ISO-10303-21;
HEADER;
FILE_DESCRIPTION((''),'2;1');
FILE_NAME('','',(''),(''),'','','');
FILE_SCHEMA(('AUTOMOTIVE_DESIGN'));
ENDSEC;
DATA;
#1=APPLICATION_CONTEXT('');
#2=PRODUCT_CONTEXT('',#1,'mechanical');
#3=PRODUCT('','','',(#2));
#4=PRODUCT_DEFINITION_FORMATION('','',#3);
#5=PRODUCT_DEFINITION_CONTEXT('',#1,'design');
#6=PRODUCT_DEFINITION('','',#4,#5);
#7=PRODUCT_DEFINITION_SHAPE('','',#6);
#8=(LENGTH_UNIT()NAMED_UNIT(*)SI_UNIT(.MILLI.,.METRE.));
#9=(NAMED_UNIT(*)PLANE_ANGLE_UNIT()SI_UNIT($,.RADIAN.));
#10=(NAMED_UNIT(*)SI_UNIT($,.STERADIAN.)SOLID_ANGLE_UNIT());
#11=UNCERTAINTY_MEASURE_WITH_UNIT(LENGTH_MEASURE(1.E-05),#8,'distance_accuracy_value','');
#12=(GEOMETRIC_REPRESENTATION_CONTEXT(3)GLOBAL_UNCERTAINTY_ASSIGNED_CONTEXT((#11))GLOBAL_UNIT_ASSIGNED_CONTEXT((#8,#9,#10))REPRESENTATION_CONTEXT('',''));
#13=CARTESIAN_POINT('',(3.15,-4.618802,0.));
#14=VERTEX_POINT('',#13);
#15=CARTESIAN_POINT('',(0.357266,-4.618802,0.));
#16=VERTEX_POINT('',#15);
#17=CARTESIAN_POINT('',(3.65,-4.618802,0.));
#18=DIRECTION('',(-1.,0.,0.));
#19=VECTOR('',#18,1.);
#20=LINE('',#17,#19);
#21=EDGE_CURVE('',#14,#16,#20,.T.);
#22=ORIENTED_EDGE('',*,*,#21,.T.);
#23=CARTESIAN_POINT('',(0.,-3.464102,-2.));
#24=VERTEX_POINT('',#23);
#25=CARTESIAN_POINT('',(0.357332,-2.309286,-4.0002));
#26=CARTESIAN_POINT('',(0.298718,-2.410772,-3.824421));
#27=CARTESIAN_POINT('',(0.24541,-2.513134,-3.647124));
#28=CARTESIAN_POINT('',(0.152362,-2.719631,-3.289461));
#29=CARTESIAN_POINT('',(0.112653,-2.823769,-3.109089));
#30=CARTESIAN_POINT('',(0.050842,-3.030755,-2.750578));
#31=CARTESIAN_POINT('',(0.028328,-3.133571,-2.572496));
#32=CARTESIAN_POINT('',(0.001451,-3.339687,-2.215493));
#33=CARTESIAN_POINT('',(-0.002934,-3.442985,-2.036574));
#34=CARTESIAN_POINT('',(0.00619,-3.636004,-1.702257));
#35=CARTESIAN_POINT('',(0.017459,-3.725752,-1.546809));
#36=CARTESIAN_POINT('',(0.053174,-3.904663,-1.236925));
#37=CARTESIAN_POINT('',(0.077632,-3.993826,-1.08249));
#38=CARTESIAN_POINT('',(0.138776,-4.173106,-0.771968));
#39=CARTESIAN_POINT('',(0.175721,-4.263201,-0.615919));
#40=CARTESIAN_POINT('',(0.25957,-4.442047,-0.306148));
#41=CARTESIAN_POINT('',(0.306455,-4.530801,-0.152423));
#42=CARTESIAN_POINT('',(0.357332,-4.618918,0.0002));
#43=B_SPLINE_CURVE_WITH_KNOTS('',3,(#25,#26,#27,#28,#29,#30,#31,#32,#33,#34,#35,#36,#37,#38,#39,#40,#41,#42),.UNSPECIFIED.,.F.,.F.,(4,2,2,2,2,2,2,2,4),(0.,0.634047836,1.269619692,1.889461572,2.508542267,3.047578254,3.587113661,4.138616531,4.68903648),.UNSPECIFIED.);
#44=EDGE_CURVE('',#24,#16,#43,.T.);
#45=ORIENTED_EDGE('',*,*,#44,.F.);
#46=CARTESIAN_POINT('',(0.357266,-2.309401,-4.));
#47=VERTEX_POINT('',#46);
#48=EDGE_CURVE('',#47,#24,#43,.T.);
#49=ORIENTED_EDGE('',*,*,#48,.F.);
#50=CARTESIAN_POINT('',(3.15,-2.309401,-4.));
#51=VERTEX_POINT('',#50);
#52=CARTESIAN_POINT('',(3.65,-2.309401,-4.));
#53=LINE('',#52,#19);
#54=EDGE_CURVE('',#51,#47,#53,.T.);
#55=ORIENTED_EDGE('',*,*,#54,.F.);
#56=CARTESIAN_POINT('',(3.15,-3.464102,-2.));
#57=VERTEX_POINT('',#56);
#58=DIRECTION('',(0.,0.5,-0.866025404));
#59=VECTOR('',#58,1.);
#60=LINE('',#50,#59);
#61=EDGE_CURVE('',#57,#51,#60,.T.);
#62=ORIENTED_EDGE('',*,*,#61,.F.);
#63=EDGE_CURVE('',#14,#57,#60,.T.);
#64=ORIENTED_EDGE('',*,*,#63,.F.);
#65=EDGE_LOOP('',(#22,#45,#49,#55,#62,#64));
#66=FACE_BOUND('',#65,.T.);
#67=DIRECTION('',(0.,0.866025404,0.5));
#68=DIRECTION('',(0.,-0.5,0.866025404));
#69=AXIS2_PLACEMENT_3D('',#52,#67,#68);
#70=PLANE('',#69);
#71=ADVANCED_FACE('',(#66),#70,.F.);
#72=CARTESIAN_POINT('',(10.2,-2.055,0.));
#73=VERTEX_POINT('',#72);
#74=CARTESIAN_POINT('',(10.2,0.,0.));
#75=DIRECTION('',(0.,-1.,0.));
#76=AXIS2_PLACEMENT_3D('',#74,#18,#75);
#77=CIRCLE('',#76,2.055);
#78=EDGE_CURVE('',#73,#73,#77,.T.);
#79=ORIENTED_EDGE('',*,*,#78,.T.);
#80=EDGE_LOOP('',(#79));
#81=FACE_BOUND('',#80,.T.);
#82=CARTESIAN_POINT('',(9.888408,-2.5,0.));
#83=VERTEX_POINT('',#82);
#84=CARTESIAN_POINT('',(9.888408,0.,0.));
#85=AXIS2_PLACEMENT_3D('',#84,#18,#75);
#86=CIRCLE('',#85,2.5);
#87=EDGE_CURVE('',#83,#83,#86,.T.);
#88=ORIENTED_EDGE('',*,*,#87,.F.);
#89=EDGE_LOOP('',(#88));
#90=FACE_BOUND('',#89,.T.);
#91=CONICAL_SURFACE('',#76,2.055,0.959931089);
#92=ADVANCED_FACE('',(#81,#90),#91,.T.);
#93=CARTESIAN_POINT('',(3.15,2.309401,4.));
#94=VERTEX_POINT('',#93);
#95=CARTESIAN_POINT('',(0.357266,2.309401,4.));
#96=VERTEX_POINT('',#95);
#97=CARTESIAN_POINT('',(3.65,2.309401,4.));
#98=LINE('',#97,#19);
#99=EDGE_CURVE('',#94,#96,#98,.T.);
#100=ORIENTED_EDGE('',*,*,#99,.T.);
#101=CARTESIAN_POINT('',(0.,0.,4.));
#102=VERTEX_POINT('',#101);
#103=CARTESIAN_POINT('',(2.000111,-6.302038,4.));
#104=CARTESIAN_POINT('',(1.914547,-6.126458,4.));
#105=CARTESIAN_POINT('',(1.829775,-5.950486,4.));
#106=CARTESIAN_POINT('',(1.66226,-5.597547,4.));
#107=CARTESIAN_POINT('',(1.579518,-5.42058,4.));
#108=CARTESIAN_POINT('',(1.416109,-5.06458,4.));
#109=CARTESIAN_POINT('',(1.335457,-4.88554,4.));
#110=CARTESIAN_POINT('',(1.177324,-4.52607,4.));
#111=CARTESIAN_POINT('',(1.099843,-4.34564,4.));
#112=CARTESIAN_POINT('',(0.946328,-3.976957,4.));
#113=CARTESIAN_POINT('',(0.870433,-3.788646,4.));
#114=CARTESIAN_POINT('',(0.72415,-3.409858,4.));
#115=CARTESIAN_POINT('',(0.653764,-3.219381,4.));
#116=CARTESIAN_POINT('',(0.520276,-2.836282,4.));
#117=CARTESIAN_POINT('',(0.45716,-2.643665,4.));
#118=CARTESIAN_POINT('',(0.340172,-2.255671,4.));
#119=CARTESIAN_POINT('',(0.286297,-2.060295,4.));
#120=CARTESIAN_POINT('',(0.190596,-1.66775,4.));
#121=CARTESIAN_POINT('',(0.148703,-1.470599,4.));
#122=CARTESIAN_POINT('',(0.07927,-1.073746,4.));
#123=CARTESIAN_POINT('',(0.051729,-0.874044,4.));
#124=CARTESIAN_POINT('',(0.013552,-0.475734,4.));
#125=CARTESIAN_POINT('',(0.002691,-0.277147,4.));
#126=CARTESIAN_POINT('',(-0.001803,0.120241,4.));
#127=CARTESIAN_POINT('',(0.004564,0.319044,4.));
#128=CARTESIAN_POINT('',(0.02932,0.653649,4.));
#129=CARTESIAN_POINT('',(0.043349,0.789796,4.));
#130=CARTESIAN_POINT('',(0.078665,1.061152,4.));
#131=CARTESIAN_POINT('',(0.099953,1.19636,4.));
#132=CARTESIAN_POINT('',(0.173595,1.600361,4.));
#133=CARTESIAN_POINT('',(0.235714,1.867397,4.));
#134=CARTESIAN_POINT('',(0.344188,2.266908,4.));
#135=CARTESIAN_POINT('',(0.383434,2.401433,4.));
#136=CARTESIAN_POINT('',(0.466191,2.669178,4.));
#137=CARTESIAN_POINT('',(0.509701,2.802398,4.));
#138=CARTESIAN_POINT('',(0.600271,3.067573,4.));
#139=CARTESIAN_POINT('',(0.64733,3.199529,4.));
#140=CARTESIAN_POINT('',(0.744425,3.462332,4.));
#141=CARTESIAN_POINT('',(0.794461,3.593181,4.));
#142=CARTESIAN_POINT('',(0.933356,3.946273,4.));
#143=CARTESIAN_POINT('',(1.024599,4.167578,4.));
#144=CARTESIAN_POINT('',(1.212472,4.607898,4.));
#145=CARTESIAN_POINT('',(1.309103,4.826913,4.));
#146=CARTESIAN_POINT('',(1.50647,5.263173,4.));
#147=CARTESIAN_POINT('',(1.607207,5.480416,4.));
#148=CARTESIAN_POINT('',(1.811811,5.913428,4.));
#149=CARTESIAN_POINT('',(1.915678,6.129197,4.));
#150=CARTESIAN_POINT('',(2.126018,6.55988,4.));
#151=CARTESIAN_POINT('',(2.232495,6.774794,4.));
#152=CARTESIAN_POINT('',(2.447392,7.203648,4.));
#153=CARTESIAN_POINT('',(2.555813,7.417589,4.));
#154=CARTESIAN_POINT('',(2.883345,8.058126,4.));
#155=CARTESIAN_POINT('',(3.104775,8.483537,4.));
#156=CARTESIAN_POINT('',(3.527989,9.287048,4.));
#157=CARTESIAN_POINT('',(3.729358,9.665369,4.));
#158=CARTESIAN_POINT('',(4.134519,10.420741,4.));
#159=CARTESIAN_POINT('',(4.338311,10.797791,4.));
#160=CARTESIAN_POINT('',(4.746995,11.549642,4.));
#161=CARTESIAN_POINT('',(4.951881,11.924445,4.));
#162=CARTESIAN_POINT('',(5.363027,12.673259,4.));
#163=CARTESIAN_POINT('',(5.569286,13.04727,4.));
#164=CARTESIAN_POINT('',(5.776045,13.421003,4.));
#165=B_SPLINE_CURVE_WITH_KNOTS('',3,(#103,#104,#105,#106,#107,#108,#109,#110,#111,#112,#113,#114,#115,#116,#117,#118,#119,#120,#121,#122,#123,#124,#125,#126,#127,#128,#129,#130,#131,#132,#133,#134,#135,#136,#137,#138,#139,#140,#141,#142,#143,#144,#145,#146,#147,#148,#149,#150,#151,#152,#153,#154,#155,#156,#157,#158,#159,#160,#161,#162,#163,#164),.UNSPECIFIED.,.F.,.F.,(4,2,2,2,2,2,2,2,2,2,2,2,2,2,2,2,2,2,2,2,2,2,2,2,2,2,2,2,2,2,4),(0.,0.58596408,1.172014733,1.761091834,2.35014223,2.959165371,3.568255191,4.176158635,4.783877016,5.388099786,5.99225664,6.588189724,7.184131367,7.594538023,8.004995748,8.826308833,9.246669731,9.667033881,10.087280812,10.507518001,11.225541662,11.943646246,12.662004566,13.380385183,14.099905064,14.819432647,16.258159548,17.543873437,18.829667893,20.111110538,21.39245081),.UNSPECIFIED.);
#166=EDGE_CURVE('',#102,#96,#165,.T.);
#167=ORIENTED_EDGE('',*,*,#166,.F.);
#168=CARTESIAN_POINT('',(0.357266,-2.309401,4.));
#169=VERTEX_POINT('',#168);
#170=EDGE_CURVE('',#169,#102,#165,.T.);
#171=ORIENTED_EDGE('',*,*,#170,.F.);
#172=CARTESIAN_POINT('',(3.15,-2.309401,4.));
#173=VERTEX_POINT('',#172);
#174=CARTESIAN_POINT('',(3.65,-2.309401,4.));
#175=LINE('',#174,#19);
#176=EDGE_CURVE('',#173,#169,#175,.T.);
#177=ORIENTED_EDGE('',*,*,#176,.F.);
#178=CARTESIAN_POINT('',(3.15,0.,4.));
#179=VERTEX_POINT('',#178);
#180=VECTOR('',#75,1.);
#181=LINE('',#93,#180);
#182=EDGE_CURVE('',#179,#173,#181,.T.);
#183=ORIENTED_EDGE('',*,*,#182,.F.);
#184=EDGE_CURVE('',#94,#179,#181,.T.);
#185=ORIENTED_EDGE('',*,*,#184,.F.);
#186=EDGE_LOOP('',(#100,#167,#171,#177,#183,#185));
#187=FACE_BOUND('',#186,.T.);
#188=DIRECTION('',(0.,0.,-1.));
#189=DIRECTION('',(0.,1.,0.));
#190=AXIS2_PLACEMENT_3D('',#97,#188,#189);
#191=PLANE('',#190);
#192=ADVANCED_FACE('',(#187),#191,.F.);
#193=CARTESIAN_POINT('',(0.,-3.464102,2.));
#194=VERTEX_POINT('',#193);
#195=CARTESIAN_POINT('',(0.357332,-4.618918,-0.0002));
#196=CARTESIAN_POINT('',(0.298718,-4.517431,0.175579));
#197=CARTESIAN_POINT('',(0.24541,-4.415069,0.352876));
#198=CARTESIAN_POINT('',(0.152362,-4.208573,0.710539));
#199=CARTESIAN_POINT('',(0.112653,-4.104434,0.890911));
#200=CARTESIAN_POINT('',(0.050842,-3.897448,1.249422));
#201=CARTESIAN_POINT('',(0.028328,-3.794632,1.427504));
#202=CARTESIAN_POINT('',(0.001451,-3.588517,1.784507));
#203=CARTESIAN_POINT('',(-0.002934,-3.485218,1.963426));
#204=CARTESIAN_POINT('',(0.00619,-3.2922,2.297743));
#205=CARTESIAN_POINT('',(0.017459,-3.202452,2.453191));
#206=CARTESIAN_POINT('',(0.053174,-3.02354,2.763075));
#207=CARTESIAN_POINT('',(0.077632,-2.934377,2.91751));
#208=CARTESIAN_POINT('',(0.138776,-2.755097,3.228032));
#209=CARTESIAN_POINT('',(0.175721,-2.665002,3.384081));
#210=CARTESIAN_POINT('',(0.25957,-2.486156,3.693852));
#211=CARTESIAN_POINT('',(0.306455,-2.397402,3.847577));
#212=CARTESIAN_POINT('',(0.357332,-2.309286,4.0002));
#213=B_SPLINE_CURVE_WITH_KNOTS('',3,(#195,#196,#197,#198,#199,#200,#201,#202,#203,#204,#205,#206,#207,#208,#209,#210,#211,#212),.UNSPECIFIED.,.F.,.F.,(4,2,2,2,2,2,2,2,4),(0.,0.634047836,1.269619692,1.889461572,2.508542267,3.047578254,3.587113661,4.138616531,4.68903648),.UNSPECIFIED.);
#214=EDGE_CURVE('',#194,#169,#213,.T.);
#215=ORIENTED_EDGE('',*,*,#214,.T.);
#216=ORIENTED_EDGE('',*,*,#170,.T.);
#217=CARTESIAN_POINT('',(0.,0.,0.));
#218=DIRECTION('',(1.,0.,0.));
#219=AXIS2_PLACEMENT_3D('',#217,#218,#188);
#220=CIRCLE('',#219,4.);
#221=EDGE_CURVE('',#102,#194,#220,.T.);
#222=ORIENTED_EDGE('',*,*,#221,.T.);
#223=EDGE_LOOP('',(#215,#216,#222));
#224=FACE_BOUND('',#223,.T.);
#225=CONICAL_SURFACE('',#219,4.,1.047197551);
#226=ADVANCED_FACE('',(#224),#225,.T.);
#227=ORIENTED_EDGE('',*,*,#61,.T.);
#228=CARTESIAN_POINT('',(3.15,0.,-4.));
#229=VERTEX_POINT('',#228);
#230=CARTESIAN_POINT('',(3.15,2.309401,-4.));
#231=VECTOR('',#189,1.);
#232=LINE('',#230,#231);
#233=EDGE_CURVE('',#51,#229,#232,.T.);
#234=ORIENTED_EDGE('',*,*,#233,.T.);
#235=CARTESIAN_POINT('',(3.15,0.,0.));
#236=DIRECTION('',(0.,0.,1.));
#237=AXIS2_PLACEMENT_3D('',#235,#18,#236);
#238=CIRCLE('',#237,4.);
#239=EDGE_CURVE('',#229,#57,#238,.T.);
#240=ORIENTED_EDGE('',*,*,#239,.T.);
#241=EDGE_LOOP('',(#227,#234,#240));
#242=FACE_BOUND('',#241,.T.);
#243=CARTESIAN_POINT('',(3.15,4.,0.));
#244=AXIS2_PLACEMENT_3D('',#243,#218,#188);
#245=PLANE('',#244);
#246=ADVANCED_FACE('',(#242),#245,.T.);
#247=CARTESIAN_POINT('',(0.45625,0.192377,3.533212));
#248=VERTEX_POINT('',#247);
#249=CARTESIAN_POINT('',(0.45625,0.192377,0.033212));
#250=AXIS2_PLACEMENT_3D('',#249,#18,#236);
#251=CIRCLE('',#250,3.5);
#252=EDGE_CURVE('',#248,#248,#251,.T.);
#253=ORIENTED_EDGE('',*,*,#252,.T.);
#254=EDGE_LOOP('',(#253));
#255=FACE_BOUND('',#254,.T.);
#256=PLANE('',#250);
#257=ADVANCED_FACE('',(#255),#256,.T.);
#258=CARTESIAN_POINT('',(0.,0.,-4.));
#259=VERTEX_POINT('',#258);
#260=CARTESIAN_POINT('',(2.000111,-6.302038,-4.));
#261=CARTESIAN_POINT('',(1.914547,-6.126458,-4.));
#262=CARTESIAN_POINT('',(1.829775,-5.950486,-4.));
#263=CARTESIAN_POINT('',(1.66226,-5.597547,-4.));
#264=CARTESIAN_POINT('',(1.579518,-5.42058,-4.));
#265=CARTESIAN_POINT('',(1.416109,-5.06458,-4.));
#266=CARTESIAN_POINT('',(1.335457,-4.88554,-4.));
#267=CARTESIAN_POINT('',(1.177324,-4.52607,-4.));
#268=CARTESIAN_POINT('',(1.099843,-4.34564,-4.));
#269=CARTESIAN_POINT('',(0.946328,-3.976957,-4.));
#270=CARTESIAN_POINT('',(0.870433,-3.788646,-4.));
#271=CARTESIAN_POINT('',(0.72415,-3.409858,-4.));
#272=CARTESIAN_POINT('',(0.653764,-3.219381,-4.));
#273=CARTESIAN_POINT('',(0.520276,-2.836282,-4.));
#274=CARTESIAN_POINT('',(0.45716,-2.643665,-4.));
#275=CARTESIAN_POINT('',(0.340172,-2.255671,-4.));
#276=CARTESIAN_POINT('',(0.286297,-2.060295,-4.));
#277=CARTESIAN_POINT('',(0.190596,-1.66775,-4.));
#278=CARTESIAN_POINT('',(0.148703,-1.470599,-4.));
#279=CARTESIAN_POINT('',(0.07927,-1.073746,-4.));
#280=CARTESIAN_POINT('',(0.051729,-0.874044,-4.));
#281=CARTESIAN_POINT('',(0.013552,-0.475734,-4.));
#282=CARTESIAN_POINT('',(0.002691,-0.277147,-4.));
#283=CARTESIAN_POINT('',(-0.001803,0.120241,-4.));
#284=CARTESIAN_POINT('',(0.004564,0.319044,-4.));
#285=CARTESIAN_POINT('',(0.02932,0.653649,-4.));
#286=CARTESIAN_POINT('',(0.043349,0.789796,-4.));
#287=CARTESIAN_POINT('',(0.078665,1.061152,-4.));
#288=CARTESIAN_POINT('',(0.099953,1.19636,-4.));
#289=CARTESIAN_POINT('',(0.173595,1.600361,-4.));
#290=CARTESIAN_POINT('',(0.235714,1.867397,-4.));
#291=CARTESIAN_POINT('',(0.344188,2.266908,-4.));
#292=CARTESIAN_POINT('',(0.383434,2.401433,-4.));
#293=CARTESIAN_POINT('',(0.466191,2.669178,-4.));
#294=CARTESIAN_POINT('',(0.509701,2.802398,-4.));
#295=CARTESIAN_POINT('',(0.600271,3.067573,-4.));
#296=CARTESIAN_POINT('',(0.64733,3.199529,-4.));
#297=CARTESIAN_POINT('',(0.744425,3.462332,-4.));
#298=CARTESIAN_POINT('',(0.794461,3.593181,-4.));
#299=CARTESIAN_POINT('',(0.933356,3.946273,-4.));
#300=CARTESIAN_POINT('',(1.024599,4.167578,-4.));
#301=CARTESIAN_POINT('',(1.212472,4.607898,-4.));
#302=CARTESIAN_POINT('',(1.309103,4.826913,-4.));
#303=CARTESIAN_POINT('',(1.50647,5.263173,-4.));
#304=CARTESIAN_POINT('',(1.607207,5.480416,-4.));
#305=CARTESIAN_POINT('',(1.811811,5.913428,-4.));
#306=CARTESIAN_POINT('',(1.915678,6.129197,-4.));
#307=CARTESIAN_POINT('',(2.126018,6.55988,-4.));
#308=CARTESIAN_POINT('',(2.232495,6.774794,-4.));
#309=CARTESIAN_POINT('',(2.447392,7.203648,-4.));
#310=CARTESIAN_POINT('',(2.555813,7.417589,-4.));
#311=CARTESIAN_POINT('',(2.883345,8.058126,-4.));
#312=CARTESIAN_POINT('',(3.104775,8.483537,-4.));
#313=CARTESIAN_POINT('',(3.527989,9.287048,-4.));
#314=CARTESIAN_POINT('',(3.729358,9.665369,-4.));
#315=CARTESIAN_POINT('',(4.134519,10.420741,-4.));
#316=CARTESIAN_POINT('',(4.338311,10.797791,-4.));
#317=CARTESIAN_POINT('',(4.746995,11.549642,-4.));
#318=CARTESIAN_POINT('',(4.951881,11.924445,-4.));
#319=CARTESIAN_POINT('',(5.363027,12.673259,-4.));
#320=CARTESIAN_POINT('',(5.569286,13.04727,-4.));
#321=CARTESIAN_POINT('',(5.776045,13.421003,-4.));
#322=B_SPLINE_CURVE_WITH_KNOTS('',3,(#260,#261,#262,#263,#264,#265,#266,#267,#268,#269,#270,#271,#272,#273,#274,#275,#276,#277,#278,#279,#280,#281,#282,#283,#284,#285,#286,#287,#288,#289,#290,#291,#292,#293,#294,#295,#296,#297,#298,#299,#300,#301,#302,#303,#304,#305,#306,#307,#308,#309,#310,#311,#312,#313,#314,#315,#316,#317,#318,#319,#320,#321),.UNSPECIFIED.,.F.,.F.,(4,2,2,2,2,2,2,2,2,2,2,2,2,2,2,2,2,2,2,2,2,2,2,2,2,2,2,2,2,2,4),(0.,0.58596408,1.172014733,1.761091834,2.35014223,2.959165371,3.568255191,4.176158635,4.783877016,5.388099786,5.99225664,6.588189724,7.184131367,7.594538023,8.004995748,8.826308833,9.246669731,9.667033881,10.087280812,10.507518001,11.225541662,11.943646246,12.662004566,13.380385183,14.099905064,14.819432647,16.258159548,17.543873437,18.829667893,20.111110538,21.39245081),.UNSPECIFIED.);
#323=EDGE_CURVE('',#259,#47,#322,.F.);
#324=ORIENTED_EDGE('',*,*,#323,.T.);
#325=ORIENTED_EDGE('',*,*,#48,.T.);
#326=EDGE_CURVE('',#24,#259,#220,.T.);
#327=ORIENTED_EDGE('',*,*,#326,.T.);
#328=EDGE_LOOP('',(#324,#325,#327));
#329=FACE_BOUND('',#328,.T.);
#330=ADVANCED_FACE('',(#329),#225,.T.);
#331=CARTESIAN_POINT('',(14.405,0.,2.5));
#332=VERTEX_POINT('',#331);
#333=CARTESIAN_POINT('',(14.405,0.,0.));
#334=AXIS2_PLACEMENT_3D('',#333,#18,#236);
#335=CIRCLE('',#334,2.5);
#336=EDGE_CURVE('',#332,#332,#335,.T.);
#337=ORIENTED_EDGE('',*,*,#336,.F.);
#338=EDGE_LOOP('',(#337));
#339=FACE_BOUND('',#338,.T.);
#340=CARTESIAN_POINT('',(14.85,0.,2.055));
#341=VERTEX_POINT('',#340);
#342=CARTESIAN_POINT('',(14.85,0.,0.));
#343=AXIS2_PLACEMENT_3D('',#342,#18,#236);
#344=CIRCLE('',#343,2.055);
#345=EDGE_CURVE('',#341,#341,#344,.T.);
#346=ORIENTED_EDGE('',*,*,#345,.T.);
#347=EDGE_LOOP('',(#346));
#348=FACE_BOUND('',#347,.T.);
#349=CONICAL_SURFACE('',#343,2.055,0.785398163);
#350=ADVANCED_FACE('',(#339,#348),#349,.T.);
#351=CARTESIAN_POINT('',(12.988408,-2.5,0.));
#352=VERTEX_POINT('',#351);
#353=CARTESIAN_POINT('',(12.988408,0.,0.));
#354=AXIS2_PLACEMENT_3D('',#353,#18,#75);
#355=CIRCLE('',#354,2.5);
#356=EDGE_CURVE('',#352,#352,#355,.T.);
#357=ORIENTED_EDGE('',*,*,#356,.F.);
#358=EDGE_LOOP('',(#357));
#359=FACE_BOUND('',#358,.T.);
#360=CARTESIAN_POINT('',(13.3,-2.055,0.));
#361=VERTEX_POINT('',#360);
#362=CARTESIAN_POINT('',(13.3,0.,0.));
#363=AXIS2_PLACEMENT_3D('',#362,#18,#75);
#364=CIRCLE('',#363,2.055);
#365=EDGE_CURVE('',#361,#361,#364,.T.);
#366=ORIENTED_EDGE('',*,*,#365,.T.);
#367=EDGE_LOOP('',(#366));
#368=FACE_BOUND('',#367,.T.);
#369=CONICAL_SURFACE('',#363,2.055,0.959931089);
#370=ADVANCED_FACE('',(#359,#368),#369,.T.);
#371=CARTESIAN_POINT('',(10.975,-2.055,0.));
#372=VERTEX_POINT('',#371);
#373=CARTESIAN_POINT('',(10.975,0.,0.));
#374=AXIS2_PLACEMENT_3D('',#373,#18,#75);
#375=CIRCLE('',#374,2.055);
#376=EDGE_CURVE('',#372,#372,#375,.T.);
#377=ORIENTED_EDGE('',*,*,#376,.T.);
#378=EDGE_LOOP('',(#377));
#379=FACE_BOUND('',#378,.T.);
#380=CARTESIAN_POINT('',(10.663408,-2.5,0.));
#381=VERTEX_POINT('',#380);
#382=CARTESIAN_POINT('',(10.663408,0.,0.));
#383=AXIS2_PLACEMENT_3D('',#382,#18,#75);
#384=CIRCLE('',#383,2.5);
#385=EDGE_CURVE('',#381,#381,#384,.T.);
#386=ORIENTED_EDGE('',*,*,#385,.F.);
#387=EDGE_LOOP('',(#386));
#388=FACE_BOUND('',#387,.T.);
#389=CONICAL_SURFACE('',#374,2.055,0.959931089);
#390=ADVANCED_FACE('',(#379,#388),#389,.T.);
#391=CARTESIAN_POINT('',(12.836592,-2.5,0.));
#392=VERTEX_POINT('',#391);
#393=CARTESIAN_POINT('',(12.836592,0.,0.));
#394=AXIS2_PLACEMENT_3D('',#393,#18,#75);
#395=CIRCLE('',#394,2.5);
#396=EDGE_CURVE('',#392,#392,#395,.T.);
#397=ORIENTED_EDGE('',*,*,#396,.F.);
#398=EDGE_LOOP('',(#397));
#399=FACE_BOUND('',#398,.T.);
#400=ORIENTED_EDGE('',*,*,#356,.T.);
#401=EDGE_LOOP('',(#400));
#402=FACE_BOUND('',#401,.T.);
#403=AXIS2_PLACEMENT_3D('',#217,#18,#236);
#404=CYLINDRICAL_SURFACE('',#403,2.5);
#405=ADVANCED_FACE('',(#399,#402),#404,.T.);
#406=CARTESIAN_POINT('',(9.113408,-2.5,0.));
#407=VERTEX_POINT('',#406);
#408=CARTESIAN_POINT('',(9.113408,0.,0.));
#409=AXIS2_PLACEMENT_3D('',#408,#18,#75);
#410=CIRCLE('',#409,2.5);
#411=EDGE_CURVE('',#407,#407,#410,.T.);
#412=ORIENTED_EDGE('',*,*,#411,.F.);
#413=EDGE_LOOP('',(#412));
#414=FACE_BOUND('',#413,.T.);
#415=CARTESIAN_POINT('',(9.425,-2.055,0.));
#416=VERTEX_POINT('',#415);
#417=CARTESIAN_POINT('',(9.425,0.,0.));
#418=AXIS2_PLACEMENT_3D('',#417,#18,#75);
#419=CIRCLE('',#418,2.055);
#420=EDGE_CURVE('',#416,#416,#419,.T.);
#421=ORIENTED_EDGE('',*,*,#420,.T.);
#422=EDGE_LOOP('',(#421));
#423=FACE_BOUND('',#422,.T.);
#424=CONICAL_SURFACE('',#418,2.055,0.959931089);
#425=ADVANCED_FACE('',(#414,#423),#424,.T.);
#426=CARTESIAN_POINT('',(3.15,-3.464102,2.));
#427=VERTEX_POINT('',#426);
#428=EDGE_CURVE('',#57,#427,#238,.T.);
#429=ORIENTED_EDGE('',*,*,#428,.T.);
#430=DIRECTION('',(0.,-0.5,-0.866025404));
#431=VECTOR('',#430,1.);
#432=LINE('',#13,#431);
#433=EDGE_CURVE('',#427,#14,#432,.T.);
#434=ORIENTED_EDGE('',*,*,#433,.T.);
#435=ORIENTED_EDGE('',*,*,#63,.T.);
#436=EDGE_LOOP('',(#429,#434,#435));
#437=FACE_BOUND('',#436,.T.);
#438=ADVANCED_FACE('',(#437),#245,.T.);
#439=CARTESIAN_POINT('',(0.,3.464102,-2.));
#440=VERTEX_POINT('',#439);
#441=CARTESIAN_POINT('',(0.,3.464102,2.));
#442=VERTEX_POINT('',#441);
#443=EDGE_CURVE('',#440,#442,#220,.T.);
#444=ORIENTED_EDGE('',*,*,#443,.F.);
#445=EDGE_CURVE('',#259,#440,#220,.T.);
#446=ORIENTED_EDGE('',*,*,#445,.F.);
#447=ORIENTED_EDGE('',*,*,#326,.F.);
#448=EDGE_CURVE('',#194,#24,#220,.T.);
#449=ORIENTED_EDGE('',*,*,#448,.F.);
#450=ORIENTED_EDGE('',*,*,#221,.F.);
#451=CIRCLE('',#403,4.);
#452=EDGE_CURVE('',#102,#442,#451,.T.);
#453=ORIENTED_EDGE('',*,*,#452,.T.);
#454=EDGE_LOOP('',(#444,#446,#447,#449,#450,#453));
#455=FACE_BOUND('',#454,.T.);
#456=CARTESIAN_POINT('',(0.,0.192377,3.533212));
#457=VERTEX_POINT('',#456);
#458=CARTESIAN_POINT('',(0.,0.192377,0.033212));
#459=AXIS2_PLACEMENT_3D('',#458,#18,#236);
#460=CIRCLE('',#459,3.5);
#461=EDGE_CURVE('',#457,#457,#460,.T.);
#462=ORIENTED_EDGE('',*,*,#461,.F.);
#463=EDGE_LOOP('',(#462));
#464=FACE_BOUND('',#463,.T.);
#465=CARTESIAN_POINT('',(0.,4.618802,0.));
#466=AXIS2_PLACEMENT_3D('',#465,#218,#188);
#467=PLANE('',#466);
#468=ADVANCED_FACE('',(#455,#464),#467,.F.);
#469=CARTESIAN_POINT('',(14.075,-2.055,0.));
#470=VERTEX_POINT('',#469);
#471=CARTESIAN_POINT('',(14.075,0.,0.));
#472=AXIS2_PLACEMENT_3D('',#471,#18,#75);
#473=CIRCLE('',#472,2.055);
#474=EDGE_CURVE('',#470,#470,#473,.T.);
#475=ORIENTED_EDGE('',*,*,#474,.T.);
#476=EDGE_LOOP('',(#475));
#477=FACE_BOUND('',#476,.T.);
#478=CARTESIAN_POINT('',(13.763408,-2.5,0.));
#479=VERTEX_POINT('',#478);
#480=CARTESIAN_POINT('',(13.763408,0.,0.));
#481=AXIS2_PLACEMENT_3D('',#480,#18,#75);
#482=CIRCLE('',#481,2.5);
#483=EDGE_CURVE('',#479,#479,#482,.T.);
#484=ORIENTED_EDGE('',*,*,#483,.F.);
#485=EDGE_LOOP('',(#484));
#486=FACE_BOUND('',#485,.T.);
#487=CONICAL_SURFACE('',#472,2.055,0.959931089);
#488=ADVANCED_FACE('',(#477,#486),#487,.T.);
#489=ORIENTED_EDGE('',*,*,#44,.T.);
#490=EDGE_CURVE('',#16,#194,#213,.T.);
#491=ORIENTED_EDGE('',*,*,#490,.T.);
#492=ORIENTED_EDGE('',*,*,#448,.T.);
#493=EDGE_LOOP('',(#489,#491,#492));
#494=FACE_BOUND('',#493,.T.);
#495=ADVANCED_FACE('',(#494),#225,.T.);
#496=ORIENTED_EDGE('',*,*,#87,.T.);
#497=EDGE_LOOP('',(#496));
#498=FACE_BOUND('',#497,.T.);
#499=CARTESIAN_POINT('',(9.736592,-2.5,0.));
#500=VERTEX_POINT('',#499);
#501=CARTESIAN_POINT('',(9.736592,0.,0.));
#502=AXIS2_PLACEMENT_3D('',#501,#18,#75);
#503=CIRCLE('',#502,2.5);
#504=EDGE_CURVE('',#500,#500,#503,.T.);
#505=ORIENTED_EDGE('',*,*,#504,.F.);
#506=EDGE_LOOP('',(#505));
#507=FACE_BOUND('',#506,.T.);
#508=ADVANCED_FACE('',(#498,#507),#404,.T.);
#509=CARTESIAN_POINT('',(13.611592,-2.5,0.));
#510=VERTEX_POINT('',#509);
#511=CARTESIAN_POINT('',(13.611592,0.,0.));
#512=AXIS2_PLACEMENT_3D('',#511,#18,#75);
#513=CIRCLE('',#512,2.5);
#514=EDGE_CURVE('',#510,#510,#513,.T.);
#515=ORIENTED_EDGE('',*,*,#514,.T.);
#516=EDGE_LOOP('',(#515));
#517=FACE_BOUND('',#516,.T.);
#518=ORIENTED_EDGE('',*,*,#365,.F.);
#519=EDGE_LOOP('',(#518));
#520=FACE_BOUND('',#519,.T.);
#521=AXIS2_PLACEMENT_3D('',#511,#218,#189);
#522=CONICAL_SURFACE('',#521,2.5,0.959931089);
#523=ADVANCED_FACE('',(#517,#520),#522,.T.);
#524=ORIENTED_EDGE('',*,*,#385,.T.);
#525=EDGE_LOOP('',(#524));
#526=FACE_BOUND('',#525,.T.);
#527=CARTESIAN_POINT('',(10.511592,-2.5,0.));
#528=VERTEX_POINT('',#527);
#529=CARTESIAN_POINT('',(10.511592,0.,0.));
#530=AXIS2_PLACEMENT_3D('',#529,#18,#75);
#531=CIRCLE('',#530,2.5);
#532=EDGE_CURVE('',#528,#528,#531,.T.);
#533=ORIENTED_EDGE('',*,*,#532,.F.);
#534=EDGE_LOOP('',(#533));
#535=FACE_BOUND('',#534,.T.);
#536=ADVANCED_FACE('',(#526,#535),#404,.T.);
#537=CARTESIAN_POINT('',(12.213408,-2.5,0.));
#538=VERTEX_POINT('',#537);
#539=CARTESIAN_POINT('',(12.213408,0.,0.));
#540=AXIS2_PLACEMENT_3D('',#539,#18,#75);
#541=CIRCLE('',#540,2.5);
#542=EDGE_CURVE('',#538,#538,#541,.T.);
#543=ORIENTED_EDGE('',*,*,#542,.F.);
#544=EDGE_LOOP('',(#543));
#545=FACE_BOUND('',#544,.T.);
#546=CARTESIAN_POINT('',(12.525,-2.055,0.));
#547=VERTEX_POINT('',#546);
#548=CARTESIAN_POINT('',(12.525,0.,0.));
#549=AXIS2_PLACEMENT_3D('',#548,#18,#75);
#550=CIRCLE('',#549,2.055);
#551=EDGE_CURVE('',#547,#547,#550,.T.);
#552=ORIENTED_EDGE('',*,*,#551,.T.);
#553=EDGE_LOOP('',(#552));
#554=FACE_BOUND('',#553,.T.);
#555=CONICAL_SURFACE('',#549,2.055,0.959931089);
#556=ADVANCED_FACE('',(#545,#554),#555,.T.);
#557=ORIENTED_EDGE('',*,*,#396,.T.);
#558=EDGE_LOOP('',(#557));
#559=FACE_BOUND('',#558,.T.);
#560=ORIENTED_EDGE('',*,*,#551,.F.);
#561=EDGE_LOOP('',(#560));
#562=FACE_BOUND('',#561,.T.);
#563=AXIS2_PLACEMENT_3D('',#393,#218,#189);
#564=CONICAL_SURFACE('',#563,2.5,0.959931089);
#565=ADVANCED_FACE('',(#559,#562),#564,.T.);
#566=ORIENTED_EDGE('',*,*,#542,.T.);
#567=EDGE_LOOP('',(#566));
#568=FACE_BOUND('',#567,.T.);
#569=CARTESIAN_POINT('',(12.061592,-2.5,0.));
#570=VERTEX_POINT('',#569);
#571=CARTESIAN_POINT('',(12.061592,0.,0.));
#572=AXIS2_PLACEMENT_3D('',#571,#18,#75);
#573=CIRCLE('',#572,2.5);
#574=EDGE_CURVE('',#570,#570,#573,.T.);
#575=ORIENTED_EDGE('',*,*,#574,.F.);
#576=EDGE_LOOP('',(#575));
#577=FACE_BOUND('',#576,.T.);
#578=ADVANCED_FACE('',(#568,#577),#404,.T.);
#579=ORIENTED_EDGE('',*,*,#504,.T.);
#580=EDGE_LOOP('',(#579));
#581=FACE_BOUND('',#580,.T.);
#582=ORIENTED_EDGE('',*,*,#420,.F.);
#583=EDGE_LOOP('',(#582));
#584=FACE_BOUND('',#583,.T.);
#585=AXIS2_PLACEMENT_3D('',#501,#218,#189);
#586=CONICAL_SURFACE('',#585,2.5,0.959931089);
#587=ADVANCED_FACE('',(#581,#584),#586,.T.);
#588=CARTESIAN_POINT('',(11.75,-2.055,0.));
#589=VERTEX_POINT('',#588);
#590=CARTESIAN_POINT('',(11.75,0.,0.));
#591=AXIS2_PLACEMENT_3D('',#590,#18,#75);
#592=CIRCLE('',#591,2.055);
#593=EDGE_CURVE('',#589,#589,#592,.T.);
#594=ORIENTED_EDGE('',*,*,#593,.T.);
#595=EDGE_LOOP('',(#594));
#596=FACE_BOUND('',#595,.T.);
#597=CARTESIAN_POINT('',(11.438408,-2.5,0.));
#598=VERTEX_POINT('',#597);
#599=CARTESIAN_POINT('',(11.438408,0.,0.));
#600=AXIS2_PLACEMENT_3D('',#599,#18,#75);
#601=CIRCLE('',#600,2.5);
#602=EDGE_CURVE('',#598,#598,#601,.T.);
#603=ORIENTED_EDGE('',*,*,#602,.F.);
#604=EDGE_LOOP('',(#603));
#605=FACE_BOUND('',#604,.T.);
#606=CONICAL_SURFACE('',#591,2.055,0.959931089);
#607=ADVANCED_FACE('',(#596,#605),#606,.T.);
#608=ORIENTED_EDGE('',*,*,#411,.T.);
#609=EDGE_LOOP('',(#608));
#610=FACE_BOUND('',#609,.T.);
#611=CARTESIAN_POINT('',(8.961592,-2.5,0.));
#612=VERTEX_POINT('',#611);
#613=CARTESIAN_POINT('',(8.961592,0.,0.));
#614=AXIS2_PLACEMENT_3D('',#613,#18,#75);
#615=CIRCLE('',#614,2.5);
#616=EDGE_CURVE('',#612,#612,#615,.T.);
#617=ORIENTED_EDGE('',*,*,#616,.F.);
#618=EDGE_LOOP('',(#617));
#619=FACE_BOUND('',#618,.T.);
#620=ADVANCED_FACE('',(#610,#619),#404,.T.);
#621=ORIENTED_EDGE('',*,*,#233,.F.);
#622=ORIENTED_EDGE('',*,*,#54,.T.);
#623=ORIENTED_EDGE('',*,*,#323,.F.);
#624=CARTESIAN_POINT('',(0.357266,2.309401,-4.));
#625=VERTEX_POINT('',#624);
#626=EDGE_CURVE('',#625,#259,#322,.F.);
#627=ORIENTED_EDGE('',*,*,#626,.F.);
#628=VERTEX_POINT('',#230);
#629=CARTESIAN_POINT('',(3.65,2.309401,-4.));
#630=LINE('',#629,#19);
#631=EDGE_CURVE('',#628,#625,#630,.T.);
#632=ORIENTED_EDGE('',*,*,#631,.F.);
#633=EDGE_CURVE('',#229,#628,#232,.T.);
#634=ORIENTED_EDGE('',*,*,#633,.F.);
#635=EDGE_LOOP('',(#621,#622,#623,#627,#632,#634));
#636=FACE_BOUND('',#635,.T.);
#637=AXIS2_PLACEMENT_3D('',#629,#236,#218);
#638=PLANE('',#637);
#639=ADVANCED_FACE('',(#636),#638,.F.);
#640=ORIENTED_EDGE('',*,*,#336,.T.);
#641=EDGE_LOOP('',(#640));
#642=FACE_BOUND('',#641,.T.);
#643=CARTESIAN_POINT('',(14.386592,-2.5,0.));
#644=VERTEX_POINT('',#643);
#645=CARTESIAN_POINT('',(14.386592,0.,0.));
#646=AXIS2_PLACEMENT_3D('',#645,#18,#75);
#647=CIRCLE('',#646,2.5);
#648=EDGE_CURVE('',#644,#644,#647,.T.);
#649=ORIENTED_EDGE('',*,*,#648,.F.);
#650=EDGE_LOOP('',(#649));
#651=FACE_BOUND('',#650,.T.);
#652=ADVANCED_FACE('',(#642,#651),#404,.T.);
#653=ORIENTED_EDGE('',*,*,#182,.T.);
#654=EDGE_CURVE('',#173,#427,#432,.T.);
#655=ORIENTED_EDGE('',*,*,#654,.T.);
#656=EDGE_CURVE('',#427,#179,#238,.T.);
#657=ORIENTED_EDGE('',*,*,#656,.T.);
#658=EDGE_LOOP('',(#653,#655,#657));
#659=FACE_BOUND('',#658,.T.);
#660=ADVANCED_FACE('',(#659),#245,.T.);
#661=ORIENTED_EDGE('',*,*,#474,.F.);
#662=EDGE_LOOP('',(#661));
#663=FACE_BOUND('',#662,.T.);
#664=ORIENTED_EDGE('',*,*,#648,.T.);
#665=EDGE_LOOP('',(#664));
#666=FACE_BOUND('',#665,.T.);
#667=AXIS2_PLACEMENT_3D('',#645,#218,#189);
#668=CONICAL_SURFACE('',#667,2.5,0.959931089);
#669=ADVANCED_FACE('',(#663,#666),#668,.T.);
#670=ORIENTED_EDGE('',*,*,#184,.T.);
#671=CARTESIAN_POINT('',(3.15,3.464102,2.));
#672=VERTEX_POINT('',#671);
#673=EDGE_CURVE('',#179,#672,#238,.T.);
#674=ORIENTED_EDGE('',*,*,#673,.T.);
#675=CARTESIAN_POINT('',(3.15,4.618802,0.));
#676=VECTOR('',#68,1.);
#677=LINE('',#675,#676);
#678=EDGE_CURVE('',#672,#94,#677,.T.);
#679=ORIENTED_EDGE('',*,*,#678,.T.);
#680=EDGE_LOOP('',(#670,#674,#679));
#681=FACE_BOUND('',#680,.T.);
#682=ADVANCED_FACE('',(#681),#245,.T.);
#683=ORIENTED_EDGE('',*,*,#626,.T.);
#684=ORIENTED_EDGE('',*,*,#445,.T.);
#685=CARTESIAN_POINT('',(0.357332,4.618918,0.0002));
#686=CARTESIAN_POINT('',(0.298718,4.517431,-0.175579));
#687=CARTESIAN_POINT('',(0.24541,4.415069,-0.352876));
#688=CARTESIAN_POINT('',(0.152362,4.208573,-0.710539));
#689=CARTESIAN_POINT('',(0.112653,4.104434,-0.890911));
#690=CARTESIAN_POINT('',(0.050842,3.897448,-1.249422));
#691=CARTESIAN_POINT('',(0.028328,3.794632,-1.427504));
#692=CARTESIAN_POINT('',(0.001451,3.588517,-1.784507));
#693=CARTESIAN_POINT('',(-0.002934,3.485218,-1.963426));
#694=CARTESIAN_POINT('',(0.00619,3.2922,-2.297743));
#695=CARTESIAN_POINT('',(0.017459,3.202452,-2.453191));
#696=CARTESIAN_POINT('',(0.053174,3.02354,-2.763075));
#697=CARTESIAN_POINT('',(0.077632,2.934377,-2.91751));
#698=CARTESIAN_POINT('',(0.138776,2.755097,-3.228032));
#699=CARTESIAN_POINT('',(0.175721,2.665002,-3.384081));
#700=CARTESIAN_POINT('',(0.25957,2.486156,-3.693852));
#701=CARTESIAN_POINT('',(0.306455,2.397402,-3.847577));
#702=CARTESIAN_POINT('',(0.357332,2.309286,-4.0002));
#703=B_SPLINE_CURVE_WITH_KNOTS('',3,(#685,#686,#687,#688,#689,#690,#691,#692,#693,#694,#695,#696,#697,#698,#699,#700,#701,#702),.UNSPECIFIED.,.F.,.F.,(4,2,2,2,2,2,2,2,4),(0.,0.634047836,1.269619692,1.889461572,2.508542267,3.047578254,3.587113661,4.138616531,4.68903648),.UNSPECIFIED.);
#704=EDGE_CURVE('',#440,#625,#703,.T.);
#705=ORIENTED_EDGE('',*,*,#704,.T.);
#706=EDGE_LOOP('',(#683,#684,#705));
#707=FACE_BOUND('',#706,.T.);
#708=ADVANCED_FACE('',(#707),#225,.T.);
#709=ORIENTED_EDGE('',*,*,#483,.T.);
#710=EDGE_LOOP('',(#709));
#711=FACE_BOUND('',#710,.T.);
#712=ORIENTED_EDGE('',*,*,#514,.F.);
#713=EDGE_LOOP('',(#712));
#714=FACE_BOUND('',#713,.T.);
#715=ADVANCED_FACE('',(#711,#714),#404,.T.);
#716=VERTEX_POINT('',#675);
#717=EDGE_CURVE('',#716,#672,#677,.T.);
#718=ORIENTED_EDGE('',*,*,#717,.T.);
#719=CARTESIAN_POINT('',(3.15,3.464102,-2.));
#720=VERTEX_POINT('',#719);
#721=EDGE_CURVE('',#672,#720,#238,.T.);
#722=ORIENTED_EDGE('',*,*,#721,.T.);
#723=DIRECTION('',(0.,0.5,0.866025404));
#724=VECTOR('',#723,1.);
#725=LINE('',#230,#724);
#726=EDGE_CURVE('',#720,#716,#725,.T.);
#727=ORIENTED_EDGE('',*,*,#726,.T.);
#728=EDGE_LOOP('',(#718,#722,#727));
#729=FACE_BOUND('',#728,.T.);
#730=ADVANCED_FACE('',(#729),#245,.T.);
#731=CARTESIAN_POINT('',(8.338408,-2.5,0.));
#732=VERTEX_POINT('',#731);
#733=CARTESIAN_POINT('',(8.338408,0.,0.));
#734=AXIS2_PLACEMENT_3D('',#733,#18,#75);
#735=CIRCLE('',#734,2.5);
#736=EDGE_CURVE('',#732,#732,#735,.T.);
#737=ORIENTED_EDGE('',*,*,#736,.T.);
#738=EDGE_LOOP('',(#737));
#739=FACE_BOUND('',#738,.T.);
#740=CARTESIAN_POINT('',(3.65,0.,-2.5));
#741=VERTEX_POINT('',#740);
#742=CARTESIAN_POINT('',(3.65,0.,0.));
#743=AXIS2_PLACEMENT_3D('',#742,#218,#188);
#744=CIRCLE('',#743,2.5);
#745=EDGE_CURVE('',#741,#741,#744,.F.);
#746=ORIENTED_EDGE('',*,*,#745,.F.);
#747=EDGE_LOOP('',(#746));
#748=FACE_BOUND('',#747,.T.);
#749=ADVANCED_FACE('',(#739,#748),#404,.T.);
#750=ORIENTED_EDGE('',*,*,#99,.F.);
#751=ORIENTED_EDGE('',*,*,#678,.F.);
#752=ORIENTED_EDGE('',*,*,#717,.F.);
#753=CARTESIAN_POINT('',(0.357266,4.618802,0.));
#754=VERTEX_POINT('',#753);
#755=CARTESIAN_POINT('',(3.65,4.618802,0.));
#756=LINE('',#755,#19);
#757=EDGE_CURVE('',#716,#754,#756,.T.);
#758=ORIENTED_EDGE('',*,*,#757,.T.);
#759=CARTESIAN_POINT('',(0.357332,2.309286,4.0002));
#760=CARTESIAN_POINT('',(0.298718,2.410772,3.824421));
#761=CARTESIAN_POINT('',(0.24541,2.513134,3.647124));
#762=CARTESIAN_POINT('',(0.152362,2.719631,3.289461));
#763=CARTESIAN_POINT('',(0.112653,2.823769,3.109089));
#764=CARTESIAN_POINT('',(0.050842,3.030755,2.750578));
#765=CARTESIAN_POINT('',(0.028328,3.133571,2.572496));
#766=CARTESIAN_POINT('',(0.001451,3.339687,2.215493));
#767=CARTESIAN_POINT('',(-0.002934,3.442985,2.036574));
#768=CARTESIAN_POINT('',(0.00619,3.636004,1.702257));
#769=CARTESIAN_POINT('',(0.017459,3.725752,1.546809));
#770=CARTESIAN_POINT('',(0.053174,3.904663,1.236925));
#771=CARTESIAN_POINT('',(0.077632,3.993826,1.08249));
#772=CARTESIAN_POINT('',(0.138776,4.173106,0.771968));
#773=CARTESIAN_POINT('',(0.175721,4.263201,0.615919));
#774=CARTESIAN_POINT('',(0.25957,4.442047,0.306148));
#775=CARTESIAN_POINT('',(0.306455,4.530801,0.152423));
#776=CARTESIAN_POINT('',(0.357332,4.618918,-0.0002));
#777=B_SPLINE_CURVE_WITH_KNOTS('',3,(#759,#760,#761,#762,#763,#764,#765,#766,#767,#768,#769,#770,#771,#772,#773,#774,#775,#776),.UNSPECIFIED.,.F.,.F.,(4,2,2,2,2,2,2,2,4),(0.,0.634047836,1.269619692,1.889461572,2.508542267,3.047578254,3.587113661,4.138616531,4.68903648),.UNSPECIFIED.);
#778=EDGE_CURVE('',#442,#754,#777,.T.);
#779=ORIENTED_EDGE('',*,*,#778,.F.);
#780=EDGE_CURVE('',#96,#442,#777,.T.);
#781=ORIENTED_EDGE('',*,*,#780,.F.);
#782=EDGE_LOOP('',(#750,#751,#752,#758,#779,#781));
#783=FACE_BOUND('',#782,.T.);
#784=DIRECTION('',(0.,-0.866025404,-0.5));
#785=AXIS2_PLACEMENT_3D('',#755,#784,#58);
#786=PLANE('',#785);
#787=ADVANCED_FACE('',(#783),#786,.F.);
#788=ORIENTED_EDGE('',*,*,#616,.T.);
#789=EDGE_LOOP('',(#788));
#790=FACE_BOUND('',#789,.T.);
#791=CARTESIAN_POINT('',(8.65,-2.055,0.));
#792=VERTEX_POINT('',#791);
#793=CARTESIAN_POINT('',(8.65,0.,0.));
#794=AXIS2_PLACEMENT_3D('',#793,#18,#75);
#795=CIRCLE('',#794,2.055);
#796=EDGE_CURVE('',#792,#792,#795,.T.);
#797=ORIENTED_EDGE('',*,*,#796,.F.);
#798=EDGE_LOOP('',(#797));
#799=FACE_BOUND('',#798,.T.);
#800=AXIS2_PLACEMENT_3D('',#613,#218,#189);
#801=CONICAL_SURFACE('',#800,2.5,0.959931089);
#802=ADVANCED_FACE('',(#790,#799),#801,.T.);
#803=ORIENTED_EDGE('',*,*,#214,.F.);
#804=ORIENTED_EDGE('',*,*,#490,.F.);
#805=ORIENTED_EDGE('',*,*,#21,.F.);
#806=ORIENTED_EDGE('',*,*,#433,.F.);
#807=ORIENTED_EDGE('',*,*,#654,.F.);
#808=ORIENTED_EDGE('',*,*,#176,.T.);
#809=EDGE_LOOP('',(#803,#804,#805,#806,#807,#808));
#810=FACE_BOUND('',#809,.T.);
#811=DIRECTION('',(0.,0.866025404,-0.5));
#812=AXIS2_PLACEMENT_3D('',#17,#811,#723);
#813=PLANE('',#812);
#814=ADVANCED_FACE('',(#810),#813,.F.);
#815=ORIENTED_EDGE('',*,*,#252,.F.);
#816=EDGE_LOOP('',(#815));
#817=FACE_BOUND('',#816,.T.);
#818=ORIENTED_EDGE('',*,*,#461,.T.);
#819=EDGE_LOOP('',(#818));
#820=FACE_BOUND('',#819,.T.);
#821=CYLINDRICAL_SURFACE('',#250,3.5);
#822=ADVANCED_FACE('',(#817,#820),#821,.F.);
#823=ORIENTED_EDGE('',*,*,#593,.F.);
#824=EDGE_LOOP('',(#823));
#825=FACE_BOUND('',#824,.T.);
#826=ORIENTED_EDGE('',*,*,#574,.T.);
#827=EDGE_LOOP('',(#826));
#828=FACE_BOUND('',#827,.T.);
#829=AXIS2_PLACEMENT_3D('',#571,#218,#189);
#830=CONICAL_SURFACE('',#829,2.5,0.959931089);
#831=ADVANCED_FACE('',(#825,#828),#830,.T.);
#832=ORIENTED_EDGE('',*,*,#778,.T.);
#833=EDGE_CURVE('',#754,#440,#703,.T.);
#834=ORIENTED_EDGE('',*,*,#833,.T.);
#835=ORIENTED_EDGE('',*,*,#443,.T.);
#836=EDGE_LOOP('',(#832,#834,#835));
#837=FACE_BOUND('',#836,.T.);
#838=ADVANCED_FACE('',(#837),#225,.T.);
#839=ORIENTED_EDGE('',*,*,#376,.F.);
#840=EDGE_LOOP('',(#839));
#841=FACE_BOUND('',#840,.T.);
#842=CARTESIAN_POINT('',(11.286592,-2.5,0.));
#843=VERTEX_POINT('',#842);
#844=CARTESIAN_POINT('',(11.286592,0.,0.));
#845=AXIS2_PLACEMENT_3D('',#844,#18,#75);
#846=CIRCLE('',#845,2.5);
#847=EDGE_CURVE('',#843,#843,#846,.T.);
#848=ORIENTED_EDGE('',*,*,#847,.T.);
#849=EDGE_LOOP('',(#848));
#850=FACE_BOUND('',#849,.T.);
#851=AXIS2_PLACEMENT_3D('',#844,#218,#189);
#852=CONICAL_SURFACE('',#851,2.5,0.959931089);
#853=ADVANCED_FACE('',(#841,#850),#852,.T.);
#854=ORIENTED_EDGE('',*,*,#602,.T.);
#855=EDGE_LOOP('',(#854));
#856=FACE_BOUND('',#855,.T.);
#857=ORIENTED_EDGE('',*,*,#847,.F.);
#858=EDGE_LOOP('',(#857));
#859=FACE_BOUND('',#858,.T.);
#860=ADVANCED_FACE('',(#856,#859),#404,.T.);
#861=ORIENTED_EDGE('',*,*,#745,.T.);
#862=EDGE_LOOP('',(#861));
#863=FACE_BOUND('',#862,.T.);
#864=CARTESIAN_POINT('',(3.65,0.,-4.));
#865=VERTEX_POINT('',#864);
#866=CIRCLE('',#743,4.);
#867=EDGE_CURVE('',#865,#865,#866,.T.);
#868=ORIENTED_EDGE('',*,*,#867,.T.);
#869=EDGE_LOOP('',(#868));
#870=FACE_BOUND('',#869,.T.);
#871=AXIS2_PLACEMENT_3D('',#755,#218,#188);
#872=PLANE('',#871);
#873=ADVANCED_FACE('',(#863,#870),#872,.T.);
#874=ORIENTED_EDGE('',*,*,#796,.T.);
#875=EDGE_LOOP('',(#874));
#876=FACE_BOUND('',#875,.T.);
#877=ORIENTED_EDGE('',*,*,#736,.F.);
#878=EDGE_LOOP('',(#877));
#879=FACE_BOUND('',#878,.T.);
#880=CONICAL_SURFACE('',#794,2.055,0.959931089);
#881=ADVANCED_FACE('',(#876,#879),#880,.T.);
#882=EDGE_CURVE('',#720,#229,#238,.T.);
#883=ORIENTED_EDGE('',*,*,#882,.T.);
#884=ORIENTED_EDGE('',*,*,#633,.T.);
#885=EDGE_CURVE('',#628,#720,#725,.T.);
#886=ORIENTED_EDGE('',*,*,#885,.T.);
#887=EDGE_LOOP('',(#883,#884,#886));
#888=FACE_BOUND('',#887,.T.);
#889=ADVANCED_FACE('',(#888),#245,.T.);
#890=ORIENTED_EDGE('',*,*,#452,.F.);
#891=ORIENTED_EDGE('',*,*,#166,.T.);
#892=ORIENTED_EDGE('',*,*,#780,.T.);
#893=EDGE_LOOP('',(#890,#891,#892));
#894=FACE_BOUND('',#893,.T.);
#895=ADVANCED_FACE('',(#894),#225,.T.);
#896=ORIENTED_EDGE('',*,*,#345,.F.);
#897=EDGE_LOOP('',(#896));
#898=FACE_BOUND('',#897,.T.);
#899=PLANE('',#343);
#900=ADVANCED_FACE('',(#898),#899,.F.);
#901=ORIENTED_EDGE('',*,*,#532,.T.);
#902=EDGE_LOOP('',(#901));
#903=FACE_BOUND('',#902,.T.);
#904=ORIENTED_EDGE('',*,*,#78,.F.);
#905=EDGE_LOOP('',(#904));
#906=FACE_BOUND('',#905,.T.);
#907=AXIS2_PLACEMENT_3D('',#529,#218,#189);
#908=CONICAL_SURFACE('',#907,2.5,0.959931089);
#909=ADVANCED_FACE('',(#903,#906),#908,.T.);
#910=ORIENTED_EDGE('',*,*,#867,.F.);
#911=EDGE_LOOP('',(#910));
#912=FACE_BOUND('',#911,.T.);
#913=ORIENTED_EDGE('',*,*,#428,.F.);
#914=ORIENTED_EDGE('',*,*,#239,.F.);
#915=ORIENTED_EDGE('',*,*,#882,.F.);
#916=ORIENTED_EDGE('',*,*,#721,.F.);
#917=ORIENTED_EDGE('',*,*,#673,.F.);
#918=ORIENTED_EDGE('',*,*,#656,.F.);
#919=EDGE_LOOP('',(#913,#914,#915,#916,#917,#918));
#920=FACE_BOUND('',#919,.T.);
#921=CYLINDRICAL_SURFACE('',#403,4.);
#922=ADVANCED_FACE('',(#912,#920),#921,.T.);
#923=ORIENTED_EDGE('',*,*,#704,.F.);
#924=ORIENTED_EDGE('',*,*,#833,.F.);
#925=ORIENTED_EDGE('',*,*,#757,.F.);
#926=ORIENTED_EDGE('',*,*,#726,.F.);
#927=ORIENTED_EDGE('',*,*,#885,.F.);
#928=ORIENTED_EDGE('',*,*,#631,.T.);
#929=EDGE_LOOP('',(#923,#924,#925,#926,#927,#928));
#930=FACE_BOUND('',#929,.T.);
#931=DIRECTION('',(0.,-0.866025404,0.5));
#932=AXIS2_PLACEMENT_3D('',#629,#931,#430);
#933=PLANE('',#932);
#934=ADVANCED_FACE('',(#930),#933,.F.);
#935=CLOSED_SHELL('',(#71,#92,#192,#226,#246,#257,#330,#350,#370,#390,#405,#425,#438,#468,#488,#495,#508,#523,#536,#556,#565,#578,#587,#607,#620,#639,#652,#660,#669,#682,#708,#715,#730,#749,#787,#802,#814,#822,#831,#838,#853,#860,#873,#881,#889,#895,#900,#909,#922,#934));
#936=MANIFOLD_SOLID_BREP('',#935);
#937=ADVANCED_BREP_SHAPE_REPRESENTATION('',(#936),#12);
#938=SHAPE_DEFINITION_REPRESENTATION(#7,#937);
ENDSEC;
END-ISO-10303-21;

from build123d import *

# Parameters (mm, degrees)
BASEHEAD_DEPTH     = 3.65
INDENT_START       = -0.45625
INDENT_2_OUTLINE_R = 3.5
INDENT_2_DEPTH     = 0.45625
SKETCH4_W          = 0.5
SKETCH4_H          = 10.618802154
THDSCHPAT_COUNT    = 8
THDSCHPAT_PITCH    = 0.775


# Read off the part's stored shape, not the designer's step: Indent
with BuildPart() as part:
    # Sketch1 → BaseHead (new body)
    with BuildSketch(Plane(origin=(0, 0, 0), x_dir=(0, 0, -1), z_dir=(1, 0, 0))):
        Polygon((4, 2.309401077), (4, -2.309401077), (0, -4.618802154), (-4, -2.309401077), (-4, 2.309401077), (0, 4.618802154), align=None)
    extrude(amount=BASEHEAD_DEPTH)

    # Indent outline → Indent (revolve)
    with BuildSketch(Plane.YX):
        Polygon((2.5, 3.65), (2.5, 14.405), (2.055, 14.85), (0, 14.85), (0, 3.65), align=None)
    revolve(axis=Axis((0, 0, 0), (1, 0, 0)))

    # Indent 2 outline → Indent 2 (cut)
    with BuildSketch(Plane.ZY.offset(INDENT_START)):
        with Locations((0.033212245, 0.192376607)):
            Circle(INDENT_2_OUTLINE_R)
    extrude(amount=INDENT_2_DEPTH, mode=Mode.SUBTRACT)

    # Sketch3 → HeadChamfer (revolve, cut)
    with BuildSketch(Plane.XY, mode=Mode.PRIVATE) as headchamfer_sk:
        Polygon((0, 4), (3.244016936, 9.618802154), (3.244016936, 14.618802154), (-10, 14.618802154), (-10, 4), align=None)
    revolve(headchamfer_sk.sketch.rotate(Axis((0, 0, 0), (1, 0, 0)), 90), axis=Axis((0, 0, 0), (1, 0, 0)), mode=Mode.SUBTRACT)

    # Sketch4 → BearingFace (revolve, cut)
    with BuildSketch(Plane.XY, mode=Mode.PRIVATE) as bearingface_sk:
        with Locations((3.4, 9.309401077)):
            Rectangle(SKETCH4_W, SKETCH4_H)
    revolve(bearingface_sk.sketch.rotate(Axis((0, 0, 0), (1, 0, 0)), 90), axis=Axis((0, 0, 0), (1, 0, 0)), mode=Mode.SUBTRACT)

    # ThdSchSke → ThreadSchematic (revolve, cut)
    with BuildSketch(Plane.XY):
        Polygon((8.65, -2.055), (8.338407645, -2.5), (8.338407645, -3.125), (8.961592355, -3.125), (8.961592355, -2.5), align=None)
    threadschematic = revolve(axis=Axis((-3.175, 0, 0), (1, 0, 0)), mode=Mode.SUBTRACT)

    # ThdSchPat: ThreadSchematic ×8
    with Locations(*[(i * THDSCHPAT_PITCH, 0, 0) for i in range(1, THDSCHPAT_COUNT)]):
        add(threadschematic, mode=Mode.SUBTRACT)


solid = part.part
